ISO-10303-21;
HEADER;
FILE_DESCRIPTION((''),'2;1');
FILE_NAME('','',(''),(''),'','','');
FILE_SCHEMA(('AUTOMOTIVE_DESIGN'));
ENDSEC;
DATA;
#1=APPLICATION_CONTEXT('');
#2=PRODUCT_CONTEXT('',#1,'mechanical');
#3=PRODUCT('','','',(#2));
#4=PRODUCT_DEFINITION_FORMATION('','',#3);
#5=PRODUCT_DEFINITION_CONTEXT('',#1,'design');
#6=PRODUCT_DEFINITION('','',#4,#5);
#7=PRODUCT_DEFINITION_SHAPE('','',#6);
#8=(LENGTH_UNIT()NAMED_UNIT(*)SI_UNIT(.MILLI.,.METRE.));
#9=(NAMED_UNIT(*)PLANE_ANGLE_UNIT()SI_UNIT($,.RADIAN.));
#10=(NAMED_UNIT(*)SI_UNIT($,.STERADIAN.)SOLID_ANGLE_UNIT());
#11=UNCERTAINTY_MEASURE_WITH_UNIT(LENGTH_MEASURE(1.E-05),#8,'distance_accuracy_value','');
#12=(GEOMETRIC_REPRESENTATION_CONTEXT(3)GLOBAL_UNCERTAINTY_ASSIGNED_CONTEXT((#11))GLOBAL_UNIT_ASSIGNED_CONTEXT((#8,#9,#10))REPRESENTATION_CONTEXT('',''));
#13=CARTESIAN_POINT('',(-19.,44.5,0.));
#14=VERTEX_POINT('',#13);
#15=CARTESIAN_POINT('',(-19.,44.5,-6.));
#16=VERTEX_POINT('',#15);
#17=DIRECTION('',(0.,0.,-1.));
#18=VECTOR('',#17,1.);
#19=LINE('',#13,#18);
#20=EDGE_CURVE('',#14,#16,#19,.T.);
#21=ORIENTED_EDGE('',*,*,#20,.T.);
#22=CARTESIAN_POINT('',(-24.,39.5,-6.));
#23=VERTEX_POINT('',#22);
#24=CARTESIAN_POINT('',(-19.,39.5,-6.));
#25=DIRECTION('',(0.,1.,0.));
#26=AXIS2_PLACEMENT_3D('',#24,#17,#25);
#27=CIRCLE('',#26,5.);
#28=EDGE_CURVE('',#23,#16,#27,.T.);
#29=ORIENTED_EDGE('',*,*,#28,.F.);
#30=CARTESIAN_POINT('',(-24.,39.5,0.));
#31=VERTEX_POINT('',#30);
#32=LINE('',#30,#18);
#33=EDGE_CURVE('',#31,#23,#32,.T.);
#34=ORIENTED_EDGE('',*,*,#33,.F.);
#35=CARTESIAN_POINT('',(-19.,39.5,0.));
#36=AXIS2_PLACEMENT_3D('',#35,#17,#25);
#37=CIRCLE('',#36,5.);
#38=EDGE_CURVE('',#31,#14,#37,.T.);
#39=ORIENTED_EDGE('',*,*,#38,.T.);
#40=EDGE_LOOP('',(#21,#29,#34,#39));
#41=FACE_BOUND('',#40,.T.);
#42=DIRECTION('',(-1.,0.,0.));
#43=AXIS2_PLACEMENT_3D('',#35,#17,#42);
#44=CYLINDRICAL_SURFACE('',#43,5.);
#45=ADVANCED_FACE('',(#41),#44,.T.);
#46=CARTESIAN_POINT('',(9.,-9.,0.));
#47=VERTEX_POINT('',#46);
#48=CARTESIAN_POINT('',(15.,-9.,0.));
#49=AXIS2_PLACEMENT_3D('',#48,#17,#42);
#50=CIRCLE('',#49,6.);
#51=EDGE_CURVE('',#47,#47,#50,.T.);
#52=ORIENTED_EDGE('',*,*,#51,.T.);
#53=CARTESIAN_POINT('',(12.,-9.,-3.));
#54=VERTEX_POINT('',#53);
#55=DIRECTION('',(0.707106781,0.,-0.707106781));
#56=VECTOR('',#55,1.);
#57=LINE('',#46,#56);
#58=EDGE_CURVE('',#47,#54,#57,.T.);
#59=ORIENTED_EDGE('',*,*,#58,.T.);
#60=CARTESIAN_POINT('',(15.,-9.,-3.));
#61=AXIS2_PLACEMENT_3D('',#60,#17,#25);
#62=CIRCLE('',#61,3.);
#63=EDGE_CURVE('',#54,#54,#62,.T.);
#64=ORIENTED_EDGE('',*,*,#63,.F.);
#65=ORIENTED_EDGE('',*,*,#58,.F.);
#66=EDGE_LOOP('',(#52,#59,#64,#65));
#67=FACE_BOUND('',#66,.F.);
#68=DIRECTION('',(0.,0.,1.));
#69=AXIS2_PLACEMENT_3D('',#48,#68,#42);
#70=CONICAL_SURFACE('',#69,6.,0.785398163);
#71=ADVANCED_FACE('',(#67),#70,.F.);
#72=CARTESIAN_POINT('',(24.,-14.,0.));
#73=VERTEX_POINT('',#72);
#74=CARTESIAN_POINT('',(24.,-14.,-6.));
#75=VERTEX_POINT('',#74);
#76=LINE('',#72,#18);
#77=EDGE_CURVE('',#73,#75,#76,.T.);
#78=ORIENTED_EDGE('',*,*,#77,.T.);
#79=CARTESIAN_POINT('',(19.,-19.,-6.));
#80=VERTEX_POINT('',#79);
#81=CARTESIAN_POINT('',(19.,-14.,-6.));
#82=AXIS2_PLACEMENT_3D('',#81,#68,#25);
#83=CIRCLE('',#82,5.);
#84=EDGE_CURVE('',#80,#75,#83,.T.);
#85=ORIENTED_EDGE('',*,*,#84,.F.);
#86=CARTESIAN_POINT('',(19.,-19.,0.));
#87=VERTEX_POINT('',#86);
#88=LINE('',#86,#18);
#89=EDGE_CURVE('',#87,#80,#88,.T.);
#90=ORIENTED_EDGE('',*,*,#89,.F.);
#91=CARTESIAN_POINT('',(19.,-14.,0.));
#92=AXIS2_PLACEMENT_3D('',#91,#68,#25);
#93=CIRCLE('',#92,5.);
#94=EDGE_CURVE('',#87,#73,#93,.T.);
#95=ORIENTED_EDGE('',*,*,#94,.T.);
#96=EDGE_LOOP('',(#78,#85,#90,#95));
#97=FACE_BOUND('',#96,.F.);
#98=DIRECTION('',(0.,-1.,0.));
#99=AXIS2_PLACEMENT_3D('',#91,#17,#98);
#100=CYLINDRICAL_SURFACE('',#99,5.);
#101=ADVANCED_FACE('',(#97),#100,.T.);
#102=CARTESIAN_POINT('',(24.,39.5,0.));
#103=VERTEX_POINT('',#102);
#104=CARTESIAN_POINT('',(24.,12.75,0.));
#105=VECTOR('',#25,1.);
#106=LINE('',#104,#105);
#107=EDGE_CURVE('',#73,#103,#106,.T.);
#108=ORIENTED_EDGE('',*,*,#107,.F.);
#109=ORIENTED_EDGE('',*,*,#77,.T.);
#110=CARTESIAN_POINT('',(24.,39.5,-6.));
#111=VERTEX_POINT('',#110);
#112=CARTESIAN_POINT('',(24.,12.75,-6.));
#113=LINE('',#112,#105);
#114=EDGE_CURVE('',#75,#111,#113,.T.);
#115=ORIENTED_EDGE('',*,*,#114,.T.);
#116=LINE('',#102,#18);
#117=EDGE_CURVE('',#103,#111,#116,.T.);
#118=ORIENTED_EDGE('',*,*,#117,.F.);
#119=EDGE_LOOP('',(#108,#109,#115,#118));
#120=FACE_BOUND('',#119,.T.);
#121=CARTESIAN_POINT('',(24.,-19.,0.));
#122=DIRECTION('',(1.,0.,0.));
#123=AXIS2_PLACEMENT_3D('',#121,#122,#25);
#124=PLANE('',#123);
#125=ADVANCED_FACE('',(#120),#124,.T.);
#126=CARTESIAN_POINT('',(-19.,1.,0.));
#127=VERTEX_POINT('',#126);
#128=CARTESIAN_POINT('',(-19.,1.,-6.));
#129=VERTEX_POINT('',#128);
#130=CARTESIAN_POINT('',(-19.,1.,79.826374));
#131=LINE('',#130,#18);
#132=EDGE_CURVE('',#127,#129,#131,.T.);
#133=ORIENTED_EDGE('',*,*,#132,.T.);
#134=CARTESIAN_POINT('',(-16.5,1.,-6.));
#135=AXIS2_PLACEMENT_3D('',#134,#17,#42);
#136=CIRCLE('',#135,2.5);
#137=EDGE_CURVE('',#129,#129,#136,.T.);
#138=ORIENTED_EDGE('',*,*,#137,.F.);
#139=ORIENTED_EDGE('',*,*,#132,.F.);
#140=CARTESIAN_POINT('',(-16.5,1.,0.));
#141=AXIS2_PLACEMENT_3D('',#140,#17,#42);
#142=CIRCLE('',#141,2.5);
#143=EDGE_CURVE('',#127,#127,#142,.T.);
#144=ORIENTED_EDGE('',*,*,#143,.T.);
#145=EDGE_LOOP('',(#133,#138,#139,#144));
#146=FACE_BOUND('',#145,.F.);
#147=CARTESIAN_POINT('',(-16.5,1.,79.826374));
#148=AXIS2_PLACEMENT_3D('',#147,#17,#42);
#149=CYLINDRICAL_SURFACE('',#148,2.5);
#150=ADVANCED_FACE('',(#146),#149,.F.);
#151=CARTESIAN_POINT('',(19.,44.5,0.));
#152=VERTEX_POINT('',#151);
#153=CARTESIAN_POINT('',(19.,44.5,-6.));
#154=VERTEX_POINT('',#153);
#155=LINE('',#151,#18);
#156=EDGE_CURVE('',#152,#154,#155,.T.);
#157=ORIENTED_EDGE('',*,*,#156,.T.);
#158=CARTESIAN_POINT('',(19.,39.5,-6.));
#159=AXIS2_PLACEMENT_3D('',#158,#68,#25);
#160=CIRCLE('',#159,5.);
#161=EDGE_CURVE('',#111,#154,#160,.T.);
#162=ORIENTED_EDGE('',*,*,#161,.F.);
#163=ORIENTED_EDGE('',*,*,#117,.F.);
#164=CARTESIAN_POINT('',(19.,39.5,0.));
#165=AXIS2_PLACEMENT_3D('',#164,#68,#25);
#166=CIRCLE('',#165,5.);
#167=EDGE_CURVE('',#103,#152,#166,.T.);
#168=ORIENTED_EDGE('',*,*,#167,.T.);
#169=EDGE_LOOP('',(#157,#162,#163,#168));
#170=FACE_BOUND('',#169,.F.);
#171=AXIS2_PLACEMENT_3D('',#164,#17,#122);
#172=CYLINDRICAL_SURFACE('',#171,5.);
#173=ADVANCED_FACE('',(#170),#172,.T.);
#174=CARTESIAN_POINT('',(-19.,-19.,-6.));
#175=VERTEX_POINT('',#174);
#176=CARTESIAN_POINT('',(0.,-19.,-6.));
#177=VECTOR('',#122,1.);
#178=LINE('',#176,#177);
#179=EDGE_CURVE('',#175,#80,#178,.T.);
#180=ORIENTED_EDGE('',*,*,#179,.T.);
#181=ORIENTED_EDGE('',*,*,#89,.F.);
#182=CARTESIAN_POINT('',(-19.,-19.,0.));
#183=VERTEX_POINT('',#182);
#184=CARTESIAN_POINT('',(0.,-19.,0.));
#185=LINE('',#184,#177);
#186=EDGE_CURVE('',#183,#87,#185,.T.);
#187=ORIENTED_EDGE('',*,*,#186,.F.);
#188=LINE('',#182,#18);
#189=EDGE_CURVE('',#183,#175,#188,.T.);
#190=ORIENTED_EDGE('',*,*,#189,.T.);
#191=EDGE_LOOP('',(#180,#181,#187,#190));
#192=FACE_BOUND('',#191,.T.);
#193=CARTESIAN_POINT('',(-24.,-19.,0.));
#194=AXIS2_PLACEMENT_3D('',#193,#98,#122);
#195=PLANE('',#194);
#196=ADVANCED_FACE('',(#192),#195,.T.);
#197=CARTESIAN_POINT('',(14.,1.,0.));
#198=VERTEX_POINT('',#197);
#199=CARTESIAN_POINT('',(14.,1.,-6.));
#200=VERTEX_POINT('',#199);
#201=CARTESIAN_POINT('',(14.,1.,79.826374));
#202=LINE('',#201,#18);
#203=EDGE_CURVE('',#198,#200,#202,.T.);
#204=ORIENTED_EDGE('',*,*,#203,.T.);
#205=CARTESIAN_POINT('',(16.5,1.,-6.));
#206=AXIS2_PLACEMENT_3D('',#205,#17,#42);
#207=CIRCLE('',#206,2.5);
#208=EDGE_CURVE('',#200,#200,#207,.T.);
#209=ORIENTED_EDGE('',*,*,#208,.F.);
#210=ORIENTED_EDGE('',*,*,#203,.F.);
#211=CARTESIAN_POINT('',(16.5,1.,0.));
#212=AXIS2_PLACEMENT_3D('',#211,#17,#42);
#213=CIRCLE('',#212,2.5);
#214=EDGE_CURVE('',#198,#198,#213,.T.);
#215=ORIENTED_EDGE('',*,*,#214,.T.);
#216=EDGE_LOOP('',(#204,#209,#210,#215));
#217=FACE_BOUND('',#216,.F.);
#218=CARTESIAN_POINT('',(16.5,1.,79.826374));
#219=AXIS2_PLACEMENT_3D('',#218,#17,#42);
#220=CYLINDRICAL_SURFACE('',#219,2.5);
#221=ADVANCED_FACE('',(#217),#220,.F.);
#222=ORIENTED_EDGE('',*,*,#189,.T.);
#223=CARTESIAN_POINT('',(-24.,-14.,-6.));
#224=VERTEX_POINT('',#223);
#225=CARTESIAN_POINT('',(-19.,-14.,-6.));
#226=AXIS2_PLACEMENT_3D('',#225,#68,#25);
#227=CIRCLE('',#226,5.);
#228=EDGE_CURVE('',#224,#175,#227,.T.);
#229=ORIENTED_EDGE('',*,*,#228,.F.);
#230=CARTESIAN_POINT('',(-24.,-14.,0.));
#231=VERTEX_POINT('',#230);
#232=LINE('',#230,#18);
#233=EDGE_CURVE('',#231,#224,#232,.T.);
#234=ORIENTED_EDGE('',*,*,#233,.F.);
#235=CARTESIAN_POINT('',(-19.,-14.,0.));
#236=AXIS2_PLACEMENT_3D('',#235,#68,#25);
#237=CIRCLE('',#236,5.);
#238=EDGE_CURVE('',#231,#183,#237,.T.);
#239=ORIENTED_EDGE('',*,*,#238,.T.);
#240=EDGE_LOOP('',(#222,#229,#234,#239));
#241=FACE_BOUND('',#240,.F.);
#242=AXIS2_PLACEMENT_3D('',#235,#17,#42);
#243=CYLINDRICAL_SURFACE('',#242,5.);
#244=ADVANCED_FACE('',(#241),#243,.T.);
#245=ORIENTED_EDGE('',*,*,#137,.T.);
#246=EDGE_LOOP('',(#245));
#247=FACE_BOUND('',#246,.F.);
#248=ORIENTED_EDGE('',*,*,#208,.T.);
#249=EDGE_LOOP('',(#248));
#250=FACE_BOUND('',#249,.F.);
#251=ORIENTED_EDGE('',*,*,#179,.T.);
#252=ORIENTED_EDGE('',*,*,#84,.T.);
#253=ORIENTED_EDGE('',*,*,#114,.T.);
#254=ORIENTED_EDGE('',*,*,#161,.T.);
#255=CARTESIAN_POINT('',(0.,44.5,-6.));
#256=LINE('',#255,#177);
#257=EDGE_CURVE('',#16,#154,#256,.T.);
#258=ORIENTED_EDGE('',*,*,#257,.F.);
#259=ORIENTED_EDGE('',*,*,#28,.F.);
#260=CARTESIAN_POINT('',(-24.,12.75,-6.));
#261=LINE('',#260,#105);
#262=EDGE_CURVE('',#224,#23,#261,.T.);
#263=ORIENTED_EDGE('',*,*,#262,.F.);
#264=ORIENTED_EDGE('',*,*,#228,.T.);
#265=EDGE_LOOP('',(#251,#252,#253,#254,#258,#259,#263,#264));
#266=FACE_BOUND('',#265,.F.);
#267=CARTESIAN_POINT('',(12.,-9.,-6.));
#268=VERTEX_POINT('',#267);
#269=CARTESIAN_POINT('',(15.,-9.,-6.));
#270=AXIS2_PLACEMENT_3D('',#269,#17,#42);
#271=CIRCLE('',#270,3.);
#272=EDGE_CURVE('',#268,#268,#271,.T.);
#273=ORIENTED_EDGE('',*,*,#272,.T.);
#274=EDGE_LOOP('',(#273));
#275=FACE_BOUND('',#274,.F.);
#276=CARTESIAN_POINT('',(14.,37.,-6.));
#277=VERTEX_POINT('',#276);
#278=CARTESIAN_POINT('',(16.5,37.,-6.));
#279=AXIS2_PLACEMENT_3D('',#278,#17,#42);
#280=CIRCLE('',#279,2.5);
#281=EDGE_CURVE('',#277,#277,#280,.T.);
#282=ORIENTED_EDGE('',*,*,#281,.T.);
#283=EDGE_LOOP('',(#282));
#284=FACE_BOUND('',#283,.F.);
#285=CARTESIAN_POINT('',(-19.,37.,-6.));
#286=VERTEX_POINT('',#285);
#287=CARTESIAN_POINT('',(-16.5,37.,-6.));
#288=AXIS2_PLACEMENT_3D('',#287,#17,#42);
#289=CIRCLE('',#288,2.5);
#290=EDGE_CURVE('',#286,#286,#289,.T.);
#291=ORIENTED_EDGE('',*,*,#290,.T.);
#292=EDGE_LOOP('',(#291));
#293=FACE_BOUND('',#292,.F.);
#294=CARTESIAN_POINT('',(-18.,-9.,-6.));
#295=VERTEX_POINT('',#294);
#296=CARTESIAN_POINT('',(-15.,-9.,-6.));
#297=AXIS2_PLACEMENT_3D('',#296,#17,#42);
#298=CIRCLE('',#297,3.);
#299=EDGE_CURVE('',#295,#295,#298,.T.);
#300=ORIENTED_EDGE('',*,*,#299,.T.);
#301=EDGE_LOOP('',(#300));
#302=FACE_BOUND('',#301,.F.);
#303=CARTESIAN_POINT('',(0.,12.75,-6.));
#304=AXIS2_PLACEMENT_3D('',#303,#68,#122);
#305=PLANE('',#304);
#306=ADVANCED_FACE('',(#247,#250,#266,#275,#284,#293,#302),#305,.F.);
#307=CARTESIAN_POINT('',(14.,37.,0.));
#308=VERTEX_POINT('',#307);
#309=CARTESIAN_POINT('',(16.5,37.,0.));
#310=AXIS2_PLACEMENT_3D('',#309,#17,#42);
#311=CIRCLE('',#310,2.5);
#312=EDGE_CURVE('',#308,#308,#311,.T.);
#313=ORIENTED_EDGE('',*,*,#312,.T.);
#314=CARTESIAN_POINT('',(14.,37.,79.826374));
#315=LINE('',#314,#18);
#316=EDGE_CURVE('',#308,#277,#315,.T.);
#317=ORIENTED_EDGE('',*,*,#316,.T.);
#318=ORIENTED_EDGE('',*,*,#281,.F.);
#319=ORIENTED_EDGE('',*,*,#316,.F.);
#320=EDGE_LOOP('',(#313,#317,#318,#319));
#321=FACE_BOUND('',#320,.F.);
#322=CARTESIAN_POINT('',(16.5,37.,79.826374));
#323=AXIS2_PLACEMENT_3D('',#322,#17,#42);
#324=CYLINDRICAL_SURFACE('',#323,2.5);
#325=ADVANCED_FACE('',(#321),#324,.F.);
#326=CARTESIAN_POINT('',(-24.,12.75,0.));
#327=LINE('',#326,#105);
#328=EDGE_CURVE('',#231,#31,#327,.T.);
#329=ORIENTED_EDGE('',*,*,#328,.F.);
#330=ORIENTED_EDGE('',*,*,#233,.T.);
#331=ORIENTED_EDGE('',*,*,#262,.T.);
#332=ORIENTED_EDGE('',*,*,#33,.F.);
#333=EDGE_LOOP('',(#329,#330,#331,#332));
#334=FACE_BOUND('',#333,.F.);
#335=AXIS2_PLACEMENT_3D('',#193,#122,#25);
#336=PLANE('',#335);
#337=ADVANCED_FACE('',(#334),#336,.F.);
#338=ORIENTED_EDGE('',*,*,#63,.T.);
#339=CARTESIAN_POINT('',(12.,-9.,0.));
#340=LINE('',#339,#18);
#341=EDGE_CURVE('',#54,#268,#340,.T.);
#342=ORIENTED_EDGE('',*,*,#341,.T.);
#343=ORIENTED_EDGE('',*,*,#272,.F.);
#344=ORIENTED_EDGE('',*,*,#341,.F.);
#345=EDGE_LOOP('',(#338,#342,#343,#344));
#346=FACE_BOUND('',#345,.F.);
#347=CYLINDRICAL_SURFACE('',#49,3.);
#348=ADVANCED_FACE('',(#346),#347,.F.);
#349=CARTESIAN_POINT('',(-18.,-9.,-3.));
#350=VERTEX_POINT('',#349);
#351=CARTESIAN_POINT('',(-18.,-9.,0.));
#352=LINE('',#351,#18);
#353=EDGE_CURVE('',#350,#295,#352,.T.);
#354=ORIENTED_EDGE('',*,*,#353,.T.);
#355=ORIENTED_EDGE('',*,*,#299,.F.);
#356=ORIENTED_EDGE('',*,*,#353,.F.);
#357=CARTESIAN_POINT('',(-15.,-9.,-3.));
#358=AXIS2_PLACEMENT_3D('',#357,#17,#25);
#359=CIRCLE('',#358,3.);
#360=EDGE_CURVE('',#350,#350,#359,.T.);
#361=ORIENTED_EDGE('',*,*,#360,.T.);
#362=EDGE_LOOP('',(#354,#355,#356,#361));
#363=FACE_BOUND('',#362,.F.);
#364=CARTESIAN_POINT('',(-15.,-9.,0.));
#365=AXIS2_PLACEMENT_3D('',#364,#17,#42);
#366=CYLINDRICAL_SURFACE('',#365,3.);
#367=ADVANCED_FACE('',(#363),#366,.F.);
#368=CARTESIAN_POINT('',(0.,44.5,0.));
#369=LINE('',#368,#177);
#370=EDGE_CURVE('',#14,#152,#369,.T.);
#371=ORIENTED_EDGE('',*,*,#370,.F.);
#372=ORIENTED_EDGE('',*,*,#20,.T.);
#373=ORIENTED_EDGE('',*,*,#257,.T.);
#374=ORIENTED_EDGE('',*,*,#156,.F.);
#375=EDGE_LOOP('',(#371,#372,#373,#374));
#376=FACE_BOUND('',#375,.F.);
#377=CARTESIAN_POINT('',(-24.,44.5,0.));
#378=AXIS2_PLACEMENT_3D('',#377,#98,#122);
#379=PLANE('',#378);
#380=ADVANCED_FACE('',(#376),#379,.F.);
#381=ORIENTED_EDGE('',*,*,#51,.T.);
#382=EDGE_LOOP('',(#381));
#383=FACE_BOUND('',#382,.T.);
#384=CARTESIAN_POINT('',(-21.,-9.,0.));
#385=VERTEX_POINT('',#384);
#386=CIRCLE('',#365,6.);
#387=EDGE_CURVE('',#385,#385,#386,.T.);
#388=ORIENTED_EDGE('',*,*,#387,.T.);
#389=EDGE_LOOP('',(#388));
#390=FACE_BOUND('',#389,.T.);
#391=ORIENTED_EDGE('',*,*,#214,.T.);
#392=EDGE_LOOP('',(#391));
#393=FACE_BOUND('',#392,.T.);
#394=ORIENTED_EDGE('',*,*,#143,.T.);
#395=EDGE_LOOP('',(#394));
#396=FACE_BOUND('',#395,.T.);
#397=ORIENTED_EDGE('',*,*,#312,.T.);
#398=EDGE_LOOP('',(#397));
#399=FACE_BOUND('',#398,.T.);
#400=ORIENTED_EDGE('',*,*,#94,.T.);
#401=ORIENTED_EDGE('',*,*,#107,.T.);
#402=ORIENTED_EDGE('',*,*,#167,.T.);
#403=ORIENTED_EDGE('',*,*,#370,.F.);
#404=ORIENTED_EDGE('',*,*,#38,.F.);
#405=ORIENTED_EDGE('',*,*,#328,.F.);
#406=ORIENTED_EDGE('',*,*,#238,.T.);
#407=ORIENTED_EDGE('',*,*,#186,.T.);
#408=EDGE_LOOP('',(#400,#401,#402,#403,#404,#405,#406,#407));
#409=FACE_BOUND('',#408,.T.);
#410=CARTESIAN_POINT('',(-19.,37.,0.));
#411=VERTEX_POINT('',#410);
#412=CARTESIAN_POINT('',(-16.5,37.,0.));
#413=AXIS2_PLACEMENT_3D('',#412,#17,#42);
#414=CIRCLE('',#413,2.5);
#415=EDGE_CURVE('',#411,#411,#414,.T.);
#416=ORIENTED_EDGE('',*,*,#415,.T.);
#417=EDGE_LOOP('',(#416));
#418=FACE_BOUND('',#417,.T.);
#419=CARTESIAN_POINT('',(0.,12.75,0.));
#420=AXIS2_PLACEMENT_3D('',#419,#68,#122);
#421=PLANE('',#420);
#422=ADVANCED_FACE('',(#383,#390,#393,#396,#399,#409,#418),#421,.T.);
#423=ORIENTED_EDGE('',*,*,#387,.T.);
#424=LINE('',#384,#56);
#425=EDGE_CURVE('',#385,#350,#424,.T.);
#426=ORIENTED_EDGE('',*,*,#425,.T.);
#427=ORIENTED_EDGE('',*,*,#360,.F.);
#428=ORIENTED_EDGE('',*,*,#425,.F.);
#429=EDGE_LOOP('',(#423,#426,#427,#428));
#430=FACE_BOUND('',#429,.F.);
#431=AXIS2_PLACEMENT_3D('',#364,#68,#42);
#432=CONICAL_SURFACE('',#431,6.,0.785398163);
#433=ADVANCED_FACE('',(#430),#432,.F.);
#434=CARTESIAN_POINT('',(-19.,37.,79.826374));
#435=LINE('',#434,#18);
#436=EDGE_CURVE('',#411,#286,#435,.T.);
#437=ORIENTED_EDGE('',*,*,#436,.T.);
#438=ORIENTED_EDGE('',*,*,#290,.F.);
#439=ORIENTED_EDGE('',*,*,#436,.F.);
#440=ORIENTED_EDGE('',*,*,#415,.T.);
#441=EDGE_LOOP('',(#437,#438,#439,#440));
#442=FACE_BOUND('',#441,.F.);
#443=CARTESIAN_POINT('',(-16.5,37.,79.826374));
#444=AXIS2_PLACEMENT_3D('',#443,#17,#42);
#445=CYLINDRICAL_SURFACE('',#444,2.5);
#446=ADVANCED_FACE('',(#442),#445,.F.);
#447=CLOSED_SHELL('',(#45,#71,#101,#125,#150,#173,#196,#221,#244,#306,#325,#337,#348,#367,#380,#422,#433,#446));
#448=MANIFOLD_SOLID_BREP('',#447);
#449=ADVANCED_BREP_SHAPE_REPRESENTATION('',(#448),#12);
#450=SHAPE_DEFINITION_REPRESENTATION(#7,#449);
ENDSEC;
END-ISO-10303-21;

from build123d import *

# Parameters (mm, degrees)
F0_W           = 48
F0_H           = 63.5
F1_DEPTH       = 6
F2_R           = 5
F3_D           = 5
F4_D           = 6
F4_CSINK_D     = 12
F4_CSINK_ANGLE = 90


# Not quite as in the source:
# - a feature names something its author has since deleted; it is built from what else it names


with BuildPart() as f1:
    # F0 (on Top) → F1 (new body)
    with BuildSketch(Plane.XY):
        with Locations((0, 12.75)):
            Rectangle(F0_W, F0_H)
    extrude(amount=-F1_DEPTH)

    # F2
    f2_edges = [f1.edges().sort_by_distance(p)[0] for p in [
        (-24, -19, -3),
        (-24, 44.5, -3),
        (24, -19, -3),
        (24, 44.5, -3),
    ]]
    fillet(f2_edges, radius=F2_R)

    # F3 (through all)
    with Locations(Plane.XY):
        with Locations((16.5, 1), (-16.5, 1), (16.5, 37), (-16.5, 37)):
            Hole(F3_D / 2)

    # F4 (through all)
    with Locations(Plane.XY):
        with Locations((15, -9), (-15, -9)):
            CounterSinkHole(F4_D / 2, F4_CSINK_D / 2, counter_sink_angle=F4_CSINK_ANGLE)


solid = f1.part
